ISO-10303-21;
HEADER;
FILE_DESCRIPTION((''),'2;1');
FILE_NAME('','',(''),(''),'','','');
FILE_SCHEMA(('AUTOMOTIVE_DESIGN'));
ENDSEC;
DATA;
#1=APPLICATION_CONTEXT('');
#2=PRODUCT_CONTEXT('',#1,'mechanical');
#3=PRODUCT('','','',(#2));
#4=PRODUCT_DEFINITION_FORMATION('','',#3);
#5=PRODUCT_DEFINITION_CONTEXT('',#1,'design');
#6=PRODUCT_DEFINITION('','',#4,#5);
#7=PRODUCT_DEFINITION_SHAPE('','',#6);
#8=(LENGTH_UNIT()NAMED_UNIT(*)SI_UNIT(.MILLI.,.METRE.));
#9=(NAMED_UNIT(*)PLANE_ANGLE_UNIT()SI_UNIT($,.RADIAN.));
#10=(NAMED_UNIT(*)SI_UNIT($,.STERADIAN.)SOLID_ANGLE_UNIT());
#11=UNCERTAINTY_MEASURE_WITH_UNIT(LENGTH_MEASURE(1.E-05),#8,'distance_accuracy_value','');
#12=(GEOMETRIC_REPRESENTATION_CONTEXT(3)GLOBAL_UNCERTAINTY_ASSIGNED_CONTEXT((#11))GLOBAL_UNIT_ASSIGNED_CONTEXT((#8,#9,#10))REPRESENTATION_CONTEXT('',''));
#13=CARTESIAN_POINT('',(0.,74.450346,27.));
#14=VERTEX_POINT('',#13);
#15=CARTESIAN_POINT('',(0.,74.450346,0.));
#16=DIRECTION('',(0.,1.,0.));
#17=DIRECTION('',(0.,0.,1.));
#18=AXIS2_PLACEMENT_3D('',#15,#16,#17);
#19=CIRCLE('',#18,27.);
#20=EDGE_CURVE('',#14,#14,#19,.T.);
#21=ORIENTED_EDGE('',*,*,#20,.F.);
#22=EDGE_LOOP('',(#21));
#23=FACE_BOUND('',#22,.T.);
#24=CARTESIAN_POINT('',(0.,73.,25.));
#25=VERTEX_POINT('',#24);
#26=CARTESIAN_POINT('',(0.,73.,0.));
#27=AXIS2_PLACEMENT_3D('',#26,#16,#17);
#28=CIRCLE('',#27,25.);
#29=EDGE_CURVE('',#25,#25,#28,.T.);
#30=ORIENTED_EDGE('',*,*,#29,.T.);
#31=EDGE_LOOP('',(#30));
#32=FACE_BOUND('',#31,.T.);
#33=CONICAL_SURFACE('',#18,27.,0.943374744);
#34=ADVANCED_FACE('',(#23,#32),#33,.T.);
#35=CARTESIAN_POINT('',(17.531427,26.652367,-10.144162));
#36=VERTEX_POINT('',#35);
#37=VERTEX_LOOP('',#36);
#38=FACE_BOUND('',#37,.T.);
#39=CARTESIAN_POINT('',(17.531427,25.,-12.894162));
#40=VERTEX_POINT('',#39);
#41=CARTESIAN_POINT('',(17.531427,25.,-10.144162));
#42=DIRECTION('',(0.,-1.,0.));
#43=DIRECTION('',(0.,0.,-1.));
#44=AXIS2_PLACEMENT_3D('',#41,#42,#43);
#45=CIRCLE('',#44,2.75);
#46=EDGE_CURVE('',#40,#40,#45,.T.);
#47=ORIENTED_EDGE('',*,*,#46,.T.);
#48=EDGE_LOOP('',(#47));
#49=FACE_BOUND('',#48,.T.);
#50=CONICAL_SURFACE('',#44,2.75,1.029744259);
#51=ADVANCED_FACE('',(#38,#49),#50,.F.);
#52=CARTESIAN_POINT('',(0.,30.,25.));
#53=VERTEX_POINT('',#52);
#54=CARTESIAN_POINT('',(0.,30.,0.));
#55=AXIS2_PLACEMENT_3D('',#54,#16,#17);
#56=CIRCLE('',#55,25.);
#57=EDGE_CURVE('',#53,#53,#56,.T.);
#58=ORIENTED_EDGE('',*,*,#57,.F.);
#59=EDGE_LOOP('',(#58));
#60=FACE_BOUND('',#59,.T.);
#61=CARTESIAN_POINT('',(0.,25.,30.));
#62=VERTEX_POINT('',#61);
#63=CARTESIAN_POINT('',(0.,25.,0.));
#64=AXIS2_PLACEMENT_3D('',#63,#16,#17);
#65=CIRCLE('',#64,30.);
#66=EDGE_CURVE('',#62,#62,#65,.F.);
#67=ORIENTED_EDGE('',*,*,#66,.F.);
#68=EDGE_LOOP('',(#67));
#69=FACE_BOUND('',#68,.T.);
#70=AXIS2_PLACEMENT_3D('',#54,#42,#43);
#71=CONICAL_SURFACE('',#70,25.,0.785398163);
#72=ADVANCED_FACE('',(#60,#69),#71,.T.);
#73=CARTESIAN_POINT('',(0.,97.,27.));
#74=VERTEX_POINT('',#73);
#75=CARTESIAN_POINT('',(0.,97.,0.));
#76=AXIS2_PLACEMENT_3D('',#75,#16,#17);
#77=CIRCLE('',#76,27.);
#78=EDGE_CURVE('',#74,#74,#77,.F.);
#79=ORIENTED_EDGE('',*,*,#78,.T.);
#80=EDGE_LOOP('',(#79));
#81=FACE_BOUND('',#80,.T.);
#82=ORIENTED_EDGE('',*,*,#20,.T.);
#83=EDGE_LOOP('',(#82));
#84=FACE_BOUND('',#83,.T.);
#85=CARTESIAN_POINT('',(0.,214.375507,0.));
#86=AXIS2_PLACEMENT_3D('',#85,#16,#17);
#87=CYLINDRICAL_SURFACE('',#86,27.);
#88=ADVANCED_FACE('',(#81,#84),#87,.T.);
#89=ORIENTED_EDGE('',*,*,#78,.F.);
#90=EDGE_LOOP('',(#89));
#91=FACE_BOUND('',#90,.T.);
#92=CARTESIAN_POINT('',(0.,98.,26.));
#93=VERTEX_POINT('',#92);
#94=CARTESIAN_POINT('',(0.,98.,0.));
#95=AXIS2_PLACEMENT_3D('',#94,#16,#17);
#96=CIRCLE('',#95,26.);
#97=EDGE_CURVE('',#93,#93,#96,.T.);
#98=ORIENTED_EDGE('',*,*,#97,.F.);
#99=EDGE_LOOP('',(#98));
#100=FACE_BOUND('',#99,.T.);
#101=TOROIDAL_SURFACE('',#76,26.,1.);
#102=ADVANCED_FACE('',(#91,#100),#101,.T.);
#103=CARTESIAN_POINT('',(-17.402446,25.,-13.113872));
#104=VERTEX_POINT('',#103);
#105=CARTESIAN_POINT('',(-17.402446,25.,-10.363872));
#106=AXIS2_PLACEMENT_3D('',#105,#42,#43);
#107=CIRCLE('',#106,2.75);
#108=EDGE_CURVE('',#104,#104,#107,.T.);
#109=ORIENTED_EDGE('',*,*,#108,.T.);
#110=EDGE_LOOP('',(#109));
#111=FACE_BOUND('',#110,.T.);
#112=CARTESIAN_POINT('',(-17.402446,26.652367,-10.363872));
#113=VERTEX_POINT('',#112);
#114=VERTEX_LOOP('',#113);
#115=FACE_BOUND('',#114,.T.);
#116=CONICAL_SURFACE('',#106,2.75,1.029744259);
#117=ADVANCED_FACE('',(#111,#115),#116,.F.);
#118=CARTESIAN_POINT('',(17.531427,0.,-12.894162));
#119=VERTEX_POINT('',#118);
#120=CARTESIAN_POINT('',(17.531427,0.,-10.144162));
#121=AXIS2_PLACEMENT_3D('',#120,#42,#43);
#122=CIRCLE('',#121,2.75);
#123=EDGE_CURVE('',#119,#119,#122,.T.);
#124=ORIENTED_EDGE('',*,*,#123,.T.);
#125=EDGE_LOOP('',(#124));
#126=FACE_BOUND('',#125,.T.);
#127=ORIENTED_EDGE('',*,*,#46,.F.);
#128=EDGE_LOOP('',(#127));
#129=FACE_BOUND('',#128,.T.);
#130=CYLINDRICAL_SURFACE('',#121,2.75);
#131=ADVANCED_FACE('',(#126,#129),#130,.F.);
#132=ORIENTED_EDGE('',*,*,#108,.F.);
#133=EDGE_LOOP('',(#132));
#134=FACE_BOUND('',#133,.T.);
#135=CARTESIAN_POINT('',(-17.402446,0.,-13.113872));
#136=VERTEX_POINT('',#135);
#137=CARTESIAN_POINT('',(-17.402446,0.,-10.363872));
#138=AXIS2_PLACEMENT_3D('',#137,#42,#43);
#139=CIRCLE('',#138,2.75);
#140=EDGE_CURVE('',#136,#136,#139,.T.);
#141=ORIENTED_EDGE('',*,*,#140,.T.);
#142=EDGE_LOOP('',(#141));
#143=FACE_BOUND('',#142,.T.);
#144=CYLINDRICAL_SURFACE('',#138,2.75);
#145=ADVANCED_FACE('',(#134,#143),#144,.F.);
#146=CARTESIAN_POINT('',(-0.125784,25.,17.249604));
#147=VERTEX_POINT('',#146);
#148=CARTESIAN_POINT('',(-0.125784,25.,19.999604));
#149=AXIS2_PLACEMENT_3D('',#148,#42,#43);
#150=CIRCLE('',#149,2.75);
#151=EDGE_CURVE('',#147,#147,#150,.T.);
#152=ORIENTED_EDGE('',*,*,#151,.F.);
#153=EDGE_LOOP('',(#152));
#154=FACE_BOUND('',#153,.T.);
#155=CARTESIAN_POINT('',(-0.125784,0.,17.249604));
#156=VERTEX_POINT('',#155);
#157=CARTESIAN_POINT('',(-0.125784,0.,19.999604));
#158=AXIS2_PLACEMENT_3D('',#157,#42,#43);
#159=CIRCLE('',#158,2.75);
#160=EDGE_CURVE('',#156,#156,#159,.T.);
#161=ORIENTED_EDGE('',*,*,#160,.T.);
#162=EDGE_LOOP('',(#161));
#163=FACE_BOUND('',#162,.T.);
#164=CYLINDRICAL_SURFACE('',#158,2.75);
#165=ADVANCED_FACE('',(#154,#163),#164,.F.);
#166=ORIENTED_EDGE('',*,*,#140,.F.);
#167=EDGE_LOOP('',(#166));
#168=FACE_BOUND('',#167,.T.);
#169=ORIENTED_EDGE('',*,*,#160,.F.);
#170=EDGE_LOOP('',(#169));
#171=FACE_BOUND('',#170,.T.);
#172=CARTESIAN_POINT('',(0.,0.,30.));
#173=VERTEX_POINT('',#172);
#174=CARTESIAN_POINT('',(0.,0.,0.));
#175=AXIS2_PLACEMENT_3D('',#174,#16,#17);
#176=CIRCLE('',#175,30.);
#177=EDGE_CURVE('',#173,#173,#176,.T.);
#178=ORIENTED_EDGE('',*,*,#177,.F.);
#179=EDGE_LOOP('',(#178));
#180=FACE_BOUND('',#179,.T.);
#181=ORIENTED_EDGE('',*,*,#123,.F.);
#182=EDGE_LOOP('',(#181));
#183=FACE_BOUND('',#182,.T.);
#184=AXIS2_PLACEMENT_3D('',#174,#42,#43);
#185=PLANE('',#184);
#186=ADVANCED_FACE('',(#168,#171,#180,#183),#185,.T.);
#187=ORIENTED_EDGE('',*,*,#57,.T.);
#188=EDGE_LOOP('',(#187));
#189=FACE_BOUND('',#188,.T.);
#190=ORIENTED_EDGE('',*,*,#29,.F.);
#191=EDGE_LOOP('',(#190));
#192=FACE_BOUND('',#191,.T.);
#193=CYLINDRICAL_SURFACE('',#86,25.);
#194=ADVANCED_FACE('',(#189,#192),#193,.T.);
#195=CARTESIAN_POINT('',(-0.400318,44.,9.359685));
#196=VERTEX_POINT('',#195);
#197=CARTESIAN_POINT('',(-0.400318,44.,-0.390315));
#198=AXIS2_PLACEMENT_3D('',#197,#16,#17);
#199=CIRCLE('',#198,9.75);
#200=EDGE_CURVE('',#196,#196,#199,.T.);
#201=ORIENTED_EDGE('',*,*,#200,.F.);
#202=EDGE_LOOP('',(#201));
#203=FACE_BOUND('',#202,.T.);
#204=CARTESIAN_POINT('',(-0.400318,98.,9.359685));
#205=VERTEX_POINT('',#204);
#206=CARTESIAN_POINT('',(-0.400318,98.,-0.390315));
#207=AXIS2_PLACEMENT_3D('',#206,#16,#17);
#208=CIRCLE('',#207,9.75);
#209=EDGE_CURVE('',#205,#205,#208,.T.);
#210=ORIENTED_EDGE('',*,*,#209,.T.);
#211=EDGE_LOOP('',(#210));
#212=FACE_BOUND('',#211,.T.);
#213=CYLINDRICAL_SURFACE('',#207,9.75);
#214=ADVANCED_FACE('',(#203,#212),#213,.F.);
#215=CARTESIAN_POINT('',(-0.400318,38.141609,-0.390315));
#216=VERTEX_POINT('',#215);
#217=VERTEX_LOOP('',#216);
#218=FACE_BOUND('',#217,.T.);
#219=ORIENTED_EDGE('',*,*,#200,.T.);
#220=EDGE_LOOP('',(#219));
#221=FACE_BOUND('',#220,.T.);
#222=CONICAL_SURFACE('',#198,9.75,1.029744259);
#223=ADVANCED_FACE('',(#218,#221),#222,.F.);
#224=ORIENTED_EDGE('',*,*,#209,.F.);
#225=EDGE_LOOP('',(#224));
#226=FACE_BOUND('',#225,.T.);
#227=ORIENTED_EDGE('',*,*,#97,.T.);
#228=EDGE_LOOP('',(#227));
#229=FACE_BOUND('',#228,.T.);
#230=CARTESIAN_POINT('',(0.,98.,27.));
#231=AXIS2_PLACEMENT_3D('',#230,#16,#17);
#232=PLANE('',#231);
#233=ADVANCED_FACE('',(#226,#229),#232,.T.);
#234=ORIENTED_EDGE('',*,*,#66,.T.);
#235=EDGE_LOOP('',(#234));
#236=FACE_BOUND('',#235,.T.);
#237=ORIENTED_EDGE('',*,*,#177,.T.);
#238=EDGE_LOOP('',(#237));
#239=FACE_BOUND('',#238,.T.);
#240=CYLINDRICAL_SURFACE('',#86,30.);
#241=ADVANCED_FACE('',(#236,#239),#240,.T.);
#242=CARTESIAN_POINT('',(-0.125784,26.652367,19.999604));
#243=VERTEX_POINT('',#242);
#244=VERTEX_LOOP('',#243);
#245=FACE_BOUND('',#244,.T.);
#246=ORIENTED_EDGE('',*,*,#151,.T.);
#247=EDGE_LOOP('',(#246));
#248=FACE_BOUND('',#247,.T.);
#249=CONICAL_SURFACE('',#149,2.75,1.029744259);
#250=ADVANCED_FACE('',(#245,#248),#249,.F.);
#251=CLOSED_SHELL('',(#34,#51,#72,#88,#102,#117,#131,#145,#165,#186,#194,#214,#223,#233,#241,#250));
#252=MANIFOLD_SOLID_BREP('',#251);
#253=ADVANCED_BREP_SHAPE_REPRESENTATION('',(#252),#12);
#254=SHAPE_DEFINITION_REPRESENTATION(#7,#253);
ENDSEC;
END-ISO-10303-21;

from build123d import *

# Parameters (mm, degrees)
M20X0_5_TAPPED_HOLE1_D     = 19.5
M20X0_5_TAPPED_HOLE1_DEPTH = 54
M20X0_5_TAPPED_HOLE1_TIP   = 5.858391036
CHAMFER1_SIZE              = 5
FILLET3_R                  = 1
CIRPATTERN1_COUNT          = 3


with BuildPart() as part:
    # Sketch1 → Revolve1 (revolve)
    with BuildSketch(Plane(origin=(0, 0, 0), x_dir=(0, 0, -1), z_dir=(1, 0, 0))):
        Polygon((0, 0), (-30, 0), (-30, 30), (-25, 30), (-25, 73), (-27, 74.450346012), (-27, 98), (0, 98), align=None)
    revolve(axis=Axis((0, 214.375507313, 0), (0, -1, 0)))

    # M20x0.5 Tapped Hole1
    with Locations(Plane(origin=(-0.400317765, 98, -0.390314584), x_dir=(0, 0, 1), z_dir=(0, 1, 0))):
        with Locations((0, 0)):
            Hole(M20X0_5_TAPPED_HOLE1_D / 2, depth=M20X0_5_TAPPED_HOLE1_DEPTH)
            with Locations((0, 0, -(M20X0_5_TAPPED_HOLE1_DEPTH + M20X0_5_TAPPED_HOLE1_TIP / 2))):  # 118° drill point
                Cone(0, M20X0_5_TAPPED_HOLE1_D / 2, M20X0_5_TAPPED_HOLE1_TIP, mode=Mode.SUBTRACT)

    # Chamfer1
    chamfer1_edges = [part.edges().sort_by_distance(p)[0] for p in [
        (0, 30, -30),
    ]]
    chamfer(chamfer1_edges, length=CHAMFER1_SIZE - 0.0001)  # a hair under: the kernel refuses the full size

    # Fillet3
    fillet3_edges = [part.edges().sort_by_distance(p)[0] for p in [
        (0, 98, -27),
    ]]
    fillet(fillet3_edges, radius=FILLET3_R)

    # Sketch4 → M6x0.5 Tapped Hole1 (revolve, cut)
    with BuildSketch(Plane(origin=(-0.125783676, 0, 19.999604458), x_dir=(0, 0, -1), z_dir=(1, 0, 0))):
        Polygon((0, 0), (0, 26.652366702), (2.75, 25), (2.75, 0), align=None)
    m6x0_5_tapped_hole1 = revolve(axis=Axis((-0.125783676, -6.35, 19.999604458), (0, 1, 0)), mode=Mode.SUBTRACT)

    # CirPattern1: M6x0.5 Tapped Hole1 ×3 about axis
    cirpattern1_axis = Axis((0.001065889, 0, -0.169476304), (0, 1, 0))
    for i in range(1, CIRPATTERN1_COUNT):
        add(m6x0_5_tapped_hole1.rotate(cirpattern1_axis, i * 360 / CIRPATTERN1_COUNT), mode=Mode.SUBTRACT)


solid = part.part
